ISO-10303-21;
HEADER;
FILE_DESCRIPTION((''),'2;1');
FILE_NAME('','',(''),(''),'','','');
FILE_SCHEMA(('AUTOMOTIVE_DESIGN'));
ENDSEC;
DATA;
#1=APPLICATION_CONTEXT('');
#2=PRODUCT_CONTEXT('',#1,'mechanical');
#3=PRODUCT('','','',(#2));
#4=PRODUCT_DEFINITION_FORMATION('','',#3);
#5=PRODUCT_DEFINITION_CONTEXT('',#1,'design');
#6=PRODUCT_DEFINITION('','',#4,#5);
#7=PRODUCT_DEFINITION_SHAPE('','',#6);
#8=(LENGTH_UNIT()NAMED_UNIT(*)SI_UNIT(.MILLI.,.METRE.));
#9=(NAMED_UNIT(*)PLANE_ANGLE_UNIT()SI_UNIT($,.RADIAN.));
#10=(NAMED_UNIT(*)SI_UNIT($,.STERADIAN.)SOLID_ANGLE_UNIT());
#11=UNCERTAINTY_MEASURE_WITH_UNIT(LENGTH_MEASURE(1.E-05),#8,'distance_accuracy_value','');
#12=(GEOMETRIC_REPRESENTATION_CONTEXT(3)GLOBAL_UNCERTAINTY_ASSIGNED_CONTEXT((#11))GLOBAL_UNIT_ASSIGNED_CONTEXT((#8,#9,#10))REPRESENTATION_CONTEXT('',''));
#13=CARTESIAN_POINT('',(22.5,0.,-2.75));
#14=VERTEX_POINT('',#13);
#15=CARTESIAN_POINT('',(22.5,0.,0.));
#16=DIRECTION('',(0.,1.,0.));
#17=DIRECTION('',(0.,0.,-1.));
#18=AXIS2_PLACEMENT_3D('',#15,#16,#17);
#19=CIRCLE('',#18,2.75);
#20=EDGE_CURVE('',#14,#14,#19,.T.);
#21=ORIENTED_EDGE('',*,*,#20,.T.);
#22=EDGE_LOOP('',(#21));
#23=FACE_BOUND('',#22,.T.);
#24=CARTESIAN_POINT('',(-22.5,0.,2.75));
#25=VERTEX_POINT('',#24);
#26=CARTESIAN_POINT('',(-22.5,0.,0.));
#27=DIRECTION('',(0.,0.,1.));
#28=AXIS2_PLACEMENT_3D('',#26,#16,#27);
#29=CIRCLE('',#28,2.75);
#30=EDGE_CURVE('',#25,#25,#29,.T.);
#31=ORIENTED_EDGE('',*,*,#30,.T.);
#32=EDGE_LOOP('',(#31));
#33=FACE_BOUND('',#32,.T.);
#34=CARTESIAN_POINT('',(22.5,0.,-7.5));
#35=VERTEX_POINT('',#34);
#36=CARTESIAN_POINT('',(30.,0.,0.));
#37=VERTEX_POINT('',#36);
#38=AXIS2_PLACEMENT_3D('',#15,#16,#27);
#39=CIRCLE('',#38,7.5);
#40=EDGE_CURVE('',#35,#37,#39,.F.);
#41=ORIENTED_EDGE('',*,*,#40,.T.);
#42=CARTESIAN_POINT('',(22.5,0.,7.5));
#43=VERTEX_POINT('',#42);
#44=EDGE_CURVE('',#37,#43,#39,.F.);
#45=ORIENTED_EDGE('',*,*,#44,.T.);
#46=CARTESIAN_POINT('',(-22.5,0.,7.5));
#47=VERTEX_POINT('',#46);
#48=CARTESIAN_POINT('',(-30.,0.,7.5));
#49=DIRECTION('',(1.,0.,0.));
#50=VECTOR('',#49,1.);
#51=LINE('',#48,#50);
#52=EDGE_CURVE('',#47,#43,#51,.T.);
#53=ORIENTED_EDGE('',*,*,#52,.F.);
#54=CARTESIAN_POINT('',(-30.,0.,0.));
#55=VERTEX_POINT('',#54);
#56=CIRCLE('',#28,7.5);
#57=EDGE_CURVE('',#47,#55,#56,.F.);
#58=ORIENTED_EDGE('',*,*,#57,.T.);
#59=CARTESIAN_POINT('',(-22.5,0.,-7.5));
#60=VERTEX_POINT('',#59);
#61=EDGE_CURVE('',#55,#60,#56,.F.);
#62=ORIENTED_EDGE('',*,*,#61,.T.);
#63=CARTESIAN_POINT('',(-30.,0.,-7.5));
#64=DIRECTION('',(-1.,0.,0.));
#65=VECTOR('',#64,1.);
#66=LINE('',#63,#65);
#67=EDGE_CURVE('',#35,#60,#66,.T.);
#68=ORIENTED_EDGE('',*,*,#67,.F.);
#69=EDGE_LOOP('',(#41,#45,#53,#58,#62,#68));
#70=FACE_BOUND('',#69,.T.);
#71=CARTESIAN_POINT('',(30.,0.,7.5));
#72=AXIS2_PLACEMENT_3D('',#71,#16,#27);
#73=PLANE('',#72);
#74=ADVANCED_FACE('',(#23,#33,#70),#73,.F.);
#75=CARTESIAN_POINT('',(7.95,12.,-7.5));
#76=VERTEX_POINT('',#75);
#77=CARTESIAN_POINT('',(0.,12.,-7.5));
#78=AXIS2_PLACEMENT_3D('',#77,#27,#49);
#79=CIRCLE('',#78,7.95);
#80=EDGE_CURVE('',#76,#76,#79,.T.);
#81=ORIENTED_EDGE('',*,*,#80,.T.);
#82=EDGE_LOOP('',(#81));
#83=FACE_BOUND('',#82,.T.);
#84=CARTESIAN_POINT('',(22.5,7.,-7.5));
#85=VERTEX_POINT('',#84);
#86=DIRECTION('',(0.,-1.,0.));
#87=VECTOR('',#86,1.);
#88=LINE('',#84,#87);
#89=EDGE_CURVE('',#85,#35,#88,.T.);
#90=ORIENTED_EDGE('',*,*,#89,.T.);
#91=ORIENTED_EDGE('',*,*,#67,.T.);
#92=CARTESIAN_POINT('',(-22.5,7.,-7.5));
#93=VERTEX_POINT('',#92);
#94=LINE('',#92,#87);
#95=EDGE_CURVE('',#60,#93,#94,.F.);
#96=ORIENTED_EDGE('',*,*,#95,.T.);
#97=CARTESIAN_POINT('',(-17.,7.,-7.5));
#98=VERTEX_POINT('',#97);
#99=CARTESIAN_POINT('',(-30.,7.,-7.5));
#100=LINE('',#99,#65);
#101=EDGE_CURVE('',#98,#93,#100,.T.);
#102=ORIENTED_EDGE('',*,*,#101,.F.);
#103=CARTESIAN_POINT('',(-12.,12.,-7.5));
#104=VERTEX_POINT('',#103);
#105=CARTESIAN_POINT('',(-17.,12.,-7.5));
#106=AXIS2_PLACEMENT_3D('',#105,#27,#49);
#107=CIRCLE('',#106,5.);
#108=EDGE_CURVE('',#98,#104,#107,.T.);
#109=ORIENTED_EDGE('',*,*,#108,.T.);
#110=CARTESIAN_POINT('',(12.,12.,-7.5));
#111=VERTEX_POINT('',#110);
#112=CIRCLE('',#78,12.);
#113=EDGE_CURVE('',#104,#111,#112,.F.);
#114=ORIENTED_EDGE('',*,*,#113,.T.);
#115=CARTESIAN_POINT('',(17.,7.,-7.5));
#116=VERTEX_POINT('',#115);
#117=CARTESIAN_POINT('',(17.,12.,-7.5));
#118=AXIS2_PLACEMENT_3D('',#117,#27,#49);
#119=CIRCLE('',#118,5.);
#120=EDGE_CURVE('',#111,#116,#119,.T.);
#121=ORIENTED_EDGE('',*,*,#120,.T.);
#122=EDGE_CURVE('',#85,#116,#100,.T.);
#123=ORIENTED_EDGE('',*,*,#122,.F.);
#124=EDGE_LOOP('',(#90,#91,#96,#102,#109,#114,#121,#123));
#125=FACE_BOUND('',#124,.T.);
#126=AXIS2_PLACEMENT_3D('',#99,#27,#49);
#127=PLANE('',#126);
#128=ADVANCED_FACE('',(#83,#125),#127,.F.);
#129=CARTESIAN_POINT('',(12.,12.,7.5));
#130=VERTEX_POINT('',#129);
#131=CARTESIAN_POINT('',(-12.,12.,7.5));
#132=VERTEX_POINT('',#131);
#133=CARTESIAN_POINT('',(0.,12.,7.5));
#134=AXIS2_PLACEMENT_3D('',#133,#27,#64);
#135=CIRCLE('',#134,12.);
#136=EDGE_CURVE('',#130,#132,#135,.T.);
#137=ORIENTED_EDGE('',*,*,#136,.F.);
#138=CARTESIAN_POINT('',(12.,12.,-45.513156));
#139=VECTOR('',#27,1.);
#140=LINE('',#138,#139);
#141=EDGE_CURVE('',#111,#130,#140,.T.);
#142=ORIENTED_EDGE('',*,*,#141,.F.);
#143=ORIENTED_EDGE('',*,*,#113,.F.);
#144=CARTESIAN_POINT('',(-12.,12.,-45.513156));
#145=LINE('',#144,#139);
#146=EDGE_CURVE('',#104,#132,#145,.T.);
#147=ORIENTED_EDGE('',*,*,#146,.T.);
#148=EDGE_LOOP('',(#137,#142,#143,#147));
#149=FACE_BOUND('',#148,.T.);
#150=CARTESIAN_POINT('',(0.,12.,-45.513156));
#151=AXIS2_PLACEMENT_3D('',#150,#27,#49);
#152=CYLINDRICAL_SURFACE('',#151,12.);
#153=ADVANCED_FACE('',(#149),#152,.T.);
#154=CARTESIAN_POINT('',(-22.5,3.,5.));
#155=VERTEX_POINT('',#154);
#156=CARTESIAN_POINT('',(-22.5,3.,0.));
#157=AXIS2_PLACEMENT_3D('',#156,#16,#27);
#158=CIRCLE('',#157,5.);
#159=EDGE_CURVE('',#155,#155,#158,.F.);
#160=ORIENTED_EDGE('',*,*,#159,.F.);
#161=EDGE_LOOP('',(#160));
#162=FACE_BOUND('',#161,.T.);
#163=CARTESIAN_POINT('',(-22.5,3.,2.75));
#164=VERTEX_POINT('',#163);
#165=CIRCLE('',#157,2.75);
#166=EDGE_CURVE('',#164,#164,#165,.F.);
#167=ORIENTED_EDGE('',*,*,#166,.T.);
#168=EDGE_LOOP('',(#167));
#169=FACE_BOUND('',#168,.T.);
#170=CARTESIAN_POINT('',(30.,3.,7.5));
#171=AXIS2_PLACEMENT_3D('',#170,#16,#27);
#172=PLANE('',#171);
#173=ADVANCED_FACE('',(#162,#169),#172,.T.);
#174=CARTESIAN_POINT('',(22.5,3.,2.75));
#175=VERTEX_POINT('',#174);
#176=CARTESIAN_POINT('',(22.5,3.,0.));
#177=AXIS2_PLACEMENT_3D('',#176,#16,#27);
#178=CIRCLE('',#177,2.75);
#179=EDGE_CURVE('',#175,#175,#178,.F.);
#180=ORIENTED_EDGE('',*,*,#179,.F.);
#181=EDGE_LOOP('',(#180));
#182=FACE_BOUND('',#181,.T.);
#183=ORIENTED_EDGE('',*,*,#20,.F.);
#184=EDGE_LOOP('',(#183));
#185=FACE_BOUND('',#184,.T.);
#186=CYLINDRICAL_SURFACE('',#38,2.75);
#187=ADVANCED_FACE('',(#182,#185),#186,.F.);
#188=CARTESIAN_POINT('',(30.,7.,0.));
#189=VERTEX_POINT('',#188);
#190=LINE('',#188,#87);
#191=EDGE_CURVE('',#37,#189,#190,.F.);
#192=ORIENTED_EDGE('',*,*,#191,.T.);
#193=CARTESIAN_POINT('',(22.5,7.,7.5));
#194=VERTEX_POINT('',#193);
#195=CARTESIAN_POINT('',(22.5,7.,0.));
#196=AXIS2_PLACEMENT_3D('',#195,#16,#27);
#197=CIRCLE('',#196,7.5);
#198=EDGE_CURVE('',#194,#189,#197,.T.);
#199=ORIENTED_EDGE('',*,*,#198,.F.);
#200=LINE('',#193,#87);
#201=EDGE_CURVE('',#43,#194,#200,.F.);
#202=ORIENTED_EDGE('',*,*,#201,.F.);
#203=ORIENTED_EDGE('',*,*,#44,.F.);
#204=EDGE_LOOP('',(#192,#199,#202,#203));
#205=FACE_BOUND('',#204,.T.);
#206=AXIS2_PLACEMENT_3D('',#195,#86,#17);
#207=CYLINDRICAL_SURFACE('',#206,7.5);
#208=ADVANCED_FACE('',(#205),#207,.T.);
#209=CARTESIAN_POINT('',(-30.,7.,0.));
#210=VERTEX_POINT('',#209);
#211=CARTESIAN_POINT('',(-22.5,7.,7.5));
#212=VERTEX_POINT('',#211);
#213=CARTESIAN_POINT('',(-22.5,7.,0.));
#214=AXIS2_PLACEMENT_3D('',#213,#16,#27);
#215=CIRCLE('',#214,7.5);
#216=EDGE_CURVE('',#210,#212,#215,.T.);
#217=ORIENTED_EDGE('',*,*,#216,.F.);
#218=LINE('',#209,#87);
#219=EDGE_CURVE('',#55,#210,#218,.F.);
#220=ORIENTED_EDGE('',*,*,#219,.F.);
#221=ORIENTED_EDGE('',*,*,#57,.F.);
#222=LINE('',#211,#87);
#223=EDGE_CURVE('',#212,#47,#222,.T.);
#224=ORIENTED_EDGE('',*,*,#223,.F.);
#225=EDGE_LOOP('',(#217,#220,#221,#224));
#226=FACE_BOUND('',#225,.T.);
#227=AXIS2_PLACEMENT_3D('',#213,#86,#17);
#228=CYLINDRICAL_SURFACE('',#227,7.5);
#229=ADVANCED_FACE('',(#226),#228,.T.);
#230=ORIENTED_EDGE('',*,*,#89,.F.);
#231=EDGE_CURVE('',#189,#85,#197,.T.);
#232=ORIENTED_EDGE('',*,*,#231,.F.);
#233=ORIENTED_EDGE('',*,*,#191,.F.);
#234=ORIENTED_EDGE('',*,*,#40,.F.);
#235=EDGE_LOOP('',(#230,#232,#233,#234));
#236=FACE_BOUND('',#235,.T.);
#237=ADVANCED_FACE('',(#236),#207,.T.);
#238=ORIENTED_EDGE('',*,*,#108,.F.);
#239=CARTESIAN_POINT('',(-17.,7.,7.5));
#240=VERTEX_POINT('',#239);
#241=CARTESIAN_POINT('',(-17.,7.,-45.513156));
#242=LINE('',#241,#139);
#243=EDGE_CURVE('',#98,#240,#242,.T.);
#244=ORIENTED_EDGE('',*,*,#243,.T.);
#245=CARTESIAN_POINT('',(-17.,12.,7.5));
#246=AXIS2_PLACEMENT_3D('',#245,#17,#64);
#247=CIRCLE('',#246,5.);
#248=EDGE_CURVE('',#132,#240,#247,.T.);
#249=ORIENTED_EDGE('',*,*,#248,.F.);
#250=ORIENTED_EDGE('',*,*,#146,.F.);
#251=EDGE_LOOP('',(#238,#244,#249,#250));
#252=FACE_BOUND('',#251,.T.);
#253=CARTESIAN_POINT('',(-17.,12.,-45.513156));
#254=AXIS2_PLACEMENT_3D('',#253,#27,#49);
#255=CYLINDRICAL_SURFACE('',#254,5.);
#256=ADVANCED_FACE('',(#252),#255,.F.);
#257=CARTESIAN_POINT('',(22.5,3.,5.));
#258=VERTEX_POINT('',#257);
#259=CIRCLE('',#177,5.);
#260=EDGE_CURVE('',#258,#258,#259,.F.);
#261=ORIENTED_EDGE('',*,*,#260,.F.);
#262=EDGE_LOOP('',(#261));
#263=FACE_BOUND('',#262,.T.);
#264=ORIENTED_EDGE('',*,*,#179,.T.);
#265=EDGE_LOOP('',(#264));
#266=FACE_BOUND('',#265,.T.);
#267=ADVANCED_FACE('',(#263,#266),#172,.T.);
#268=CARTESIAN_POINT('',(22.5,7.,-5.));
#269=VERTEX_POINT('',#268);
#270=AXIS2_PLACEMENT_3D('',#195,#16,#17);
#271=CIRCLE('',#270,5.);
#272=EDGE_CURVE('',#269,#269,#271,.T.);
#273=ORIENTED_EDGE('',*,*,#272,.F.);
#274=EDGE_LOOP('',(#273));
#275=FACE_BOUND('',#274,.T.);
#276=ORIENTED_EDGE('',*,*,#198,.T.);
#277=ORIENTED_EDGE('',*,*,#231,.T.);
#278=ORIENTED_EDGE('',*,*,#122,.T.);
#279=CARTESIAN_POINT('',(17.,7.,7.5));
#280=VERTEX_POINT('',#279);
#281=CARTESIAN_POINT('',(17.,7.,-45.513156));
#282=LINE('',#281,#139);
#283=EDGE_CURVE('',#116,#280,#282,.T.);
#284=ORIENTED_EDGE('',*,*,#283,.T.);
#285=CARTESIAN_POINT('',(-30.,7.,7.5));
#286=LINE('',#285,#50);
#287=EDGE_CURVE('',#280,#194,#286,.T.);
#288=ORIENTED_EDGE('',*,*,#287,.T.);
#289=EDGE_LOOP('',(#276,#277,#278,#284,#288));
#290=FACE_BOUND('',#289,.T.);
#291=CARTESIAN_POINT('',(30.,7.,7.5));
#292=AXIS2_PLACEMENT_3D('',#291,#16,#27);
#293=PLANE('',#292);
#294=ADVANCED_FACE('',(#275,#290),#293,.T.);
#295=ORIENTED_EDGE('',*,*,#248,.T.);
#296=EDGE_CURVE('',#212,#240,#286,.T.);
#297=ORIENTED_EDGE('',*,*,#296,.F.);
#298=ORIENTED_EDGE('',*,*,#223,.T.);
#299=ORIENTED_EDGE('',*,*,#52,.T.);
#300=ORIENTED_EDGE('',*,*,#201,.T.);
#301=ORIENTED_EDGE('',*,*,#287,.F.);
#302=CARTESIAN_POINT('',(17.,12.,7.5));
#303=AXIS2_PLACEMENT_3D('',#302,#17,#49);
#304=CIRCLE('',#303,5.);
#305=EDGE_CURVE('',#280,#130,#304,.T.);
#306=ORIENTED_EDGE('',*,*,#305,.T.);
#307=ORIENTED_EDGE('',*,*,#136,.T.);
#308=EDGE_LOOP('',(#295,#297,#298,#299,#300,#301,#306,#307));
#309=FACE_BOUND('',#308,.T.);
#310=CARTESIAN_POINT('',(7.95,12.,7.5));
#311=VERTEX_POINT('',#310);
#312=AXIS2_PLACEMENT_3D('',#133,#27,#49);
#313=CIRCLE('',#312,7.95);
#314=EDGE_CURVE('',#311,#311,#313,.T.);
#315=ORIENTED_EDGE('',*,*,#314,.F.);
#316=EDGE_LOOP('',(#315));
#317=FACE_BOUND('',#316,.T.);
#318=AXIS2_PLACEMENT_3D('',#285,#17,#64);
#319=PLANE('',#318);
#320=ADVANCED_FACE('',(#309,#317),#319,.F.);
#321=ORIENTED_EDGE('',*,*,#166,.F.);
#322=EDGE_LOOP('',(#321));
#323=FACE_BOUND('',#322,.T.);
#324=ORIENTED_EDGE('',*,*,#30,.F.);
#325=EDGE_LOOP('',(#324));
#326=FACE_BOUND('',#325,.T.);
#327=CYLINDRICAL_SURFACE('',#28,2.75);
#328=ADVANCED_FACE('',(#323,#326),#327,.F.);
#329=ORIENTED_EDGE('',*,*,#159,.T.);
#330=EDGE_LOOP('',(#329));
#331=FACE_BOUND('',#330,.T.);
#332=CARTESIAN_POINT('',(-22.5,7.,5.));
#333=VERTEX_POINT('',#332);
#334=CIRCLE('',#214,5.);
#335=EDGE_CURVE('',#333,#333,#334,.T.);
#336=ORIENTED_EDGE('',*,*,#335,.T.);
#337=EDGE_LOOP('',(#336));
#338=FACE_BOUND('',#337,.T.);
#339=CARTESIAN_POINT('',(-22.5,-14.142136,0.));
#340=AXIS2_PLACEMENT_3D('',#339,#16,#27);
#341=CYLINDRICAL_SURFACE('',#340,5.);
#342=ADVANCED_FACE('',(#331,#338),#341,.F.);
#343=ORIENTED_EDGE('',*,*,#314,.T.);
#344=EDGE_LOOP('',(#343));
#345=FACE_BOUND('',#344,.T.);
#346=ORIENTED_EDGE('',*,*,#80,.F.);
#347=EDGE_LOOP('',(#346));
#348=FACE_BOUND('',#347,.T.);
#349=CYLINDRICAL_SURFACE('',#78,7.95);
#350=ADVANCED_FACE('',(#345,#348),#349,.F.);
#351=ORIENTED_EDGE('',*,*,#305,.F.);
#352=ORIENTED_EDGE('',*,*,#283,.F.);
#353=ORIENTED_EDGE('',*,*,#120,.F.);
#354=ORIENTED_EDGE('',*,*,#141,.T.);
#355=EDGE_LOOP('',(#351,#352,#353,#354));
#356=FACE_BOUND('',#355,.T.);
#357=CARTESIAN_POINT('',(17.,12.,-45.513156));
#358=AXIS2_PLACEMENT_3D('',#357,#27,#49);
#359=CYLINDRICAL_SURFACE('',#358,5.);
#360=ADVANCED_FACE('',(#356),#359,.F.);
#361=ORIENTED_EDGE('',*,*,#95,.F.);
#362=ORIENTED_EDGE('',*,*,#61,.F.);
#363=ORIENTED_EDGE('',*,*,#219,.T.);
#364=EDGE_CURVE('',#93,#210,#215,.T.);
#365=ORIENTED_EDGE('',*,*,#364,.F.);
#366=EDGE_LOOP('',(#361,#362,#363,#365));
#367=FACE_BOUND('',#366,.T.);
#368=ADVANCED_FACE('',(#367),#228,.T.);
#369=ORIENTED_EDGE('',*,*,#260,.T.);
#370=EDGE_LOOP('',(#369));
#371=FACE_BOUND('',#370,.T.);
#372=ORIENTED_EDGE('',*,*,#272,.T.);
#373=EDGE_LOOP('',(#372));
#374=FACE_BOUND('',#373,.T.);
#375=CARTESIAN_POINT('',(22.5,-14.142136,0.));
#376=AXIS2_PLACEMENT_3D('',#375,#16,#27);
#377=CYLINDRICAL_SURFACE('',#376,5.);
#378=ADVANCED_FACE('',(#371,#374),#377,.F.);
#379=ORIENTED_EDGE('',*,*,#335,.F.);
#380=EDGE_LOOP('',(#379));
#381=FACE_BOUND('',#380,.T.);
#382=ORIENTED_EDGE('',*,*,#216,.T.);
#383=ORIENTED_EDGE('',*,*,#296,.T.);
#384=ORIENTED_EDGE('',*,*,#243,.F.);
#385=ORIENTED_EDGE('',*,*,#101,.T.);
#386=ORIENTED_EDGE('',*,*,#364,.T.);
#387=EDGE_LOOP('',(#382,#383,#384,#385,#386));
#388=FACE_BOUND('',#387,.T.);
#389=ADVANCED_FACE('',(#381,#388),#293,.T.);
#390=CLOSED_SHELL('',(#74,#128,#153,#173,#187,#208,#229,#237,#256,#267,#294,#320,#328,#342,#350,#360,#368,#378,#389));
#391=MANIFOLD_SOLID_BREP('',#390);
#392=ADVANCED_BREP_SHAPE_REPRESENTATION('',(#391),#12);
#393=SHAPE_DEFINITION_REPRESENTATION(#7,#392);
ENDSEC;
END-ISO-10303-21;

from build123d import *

# Parameters (mm, degrees)
SKETCH1_W           = 60
SKETCH1_H           = 15
BOSS_EXTRUDE1_DEPTH = 7
SKETCH2_R           = 2.75
CUT_EXTRUDE1_DEPTH  = 32.705677725
SKETCH3_R           = 5
CUT_EXTRUDE2_DEPTH  = 4
BOSS_EXTRUDE2_DEPTH = 15
SKETCH5_R           = 7.95
CUT_EXTRUDE3_DEPTH  = 42.243181255
FILLET2_R           = 7.5


with BuildPart() as part:
    # Sketch1 → Boss-Extrude1 (new body)
    with BuildSketch(Plane(origin=(0, 0, 0), x_dir=(1, 0, 0), z_dir=(0, 1, 0))):
        Rectangle(SKETCH1_W, SKETCH1_H)
    extrude(amount=BOSS_EXTRUDE1_DEPTH)

    # Sketch2 → Cut-Extrude1 (cut, through all)
    with BuildSketch(Plane(origin=(0, 7, 0), x_dir=(1, 0, 0), z_dir=(0, 1, 0))):
        with Locations(Location((-22.5, 0, 0), (0, 0, 270))):
            Circle(SKETCH2_R)
        with Locations(Location((22.5, 0, 0), (0, 0, 90))):
            Circle(SKETCH2_R)
    extrude(amount=-CUT_EXTRUDE1_DEPTH, mode=Mode.SUBTRACT)

    # Sketch3 → Cut-Extrude2 (cut)
    with BuildSketch(Plane(origin=(0, 7, 0), x_dir=(1, 0, 0), z_dir=(0, 1, 0))):
        with Locations(Location((-22.5, 0, 0), (0, 0, 270))):
            Circle(SKETCH3_R)
        with Locations(Location((22.5, 0, 0), (0, 0, 270))):
            Circle(SKETCH3_R)
    extrude(amount=-CUT_EXTRUDE2_DEPTH, mode=Mode.SUBTRACT)

    # Sketch4 → Boss-Extrude2 (add)
    with BuildSketch(Plane.XY.offset(7.5)):
        with BuildLine():
            Line((-17, 7), (17, 7))
            ThreePointArc((17, 7), (13.464466094, 8.464466094), (12, 12))
            ThreePointArc((12, 12), (0, 24), (-12, 12))
            ThreePointArc((-12, 12), (-13.464466094, 8.464466094), (-17, 7))
        make_face()
    extrude(amount=-BOSS_EXTRUDE2_DEPTH)

    # Sketch5 → Cut-Extrude3 (cut, through all)
    with BuildSketch(Plane.XY.offset(7.5)):
        with Locations((0, 12)):
            Circle(SKETCH5_R)
    extrude(amount=-CUT_EXTRUDE3_DEPTH, mode=Mode.SUBTRACT)

    # Fillet2
    fillet2_edges = [part.edges().sort_by_distance(p)[0] for p in [
        (30, 3.5, 7.5),
        (30, 3.5, -7.5),
        (-30, 3.5, -7.5),
        (-30, 3.5, 7.5),
    ]]
    fillet(fillet2_edges, radius=FILLET2_R - 0.0001)  # a hair under: the kernel refuses the full size


solid = part.part
